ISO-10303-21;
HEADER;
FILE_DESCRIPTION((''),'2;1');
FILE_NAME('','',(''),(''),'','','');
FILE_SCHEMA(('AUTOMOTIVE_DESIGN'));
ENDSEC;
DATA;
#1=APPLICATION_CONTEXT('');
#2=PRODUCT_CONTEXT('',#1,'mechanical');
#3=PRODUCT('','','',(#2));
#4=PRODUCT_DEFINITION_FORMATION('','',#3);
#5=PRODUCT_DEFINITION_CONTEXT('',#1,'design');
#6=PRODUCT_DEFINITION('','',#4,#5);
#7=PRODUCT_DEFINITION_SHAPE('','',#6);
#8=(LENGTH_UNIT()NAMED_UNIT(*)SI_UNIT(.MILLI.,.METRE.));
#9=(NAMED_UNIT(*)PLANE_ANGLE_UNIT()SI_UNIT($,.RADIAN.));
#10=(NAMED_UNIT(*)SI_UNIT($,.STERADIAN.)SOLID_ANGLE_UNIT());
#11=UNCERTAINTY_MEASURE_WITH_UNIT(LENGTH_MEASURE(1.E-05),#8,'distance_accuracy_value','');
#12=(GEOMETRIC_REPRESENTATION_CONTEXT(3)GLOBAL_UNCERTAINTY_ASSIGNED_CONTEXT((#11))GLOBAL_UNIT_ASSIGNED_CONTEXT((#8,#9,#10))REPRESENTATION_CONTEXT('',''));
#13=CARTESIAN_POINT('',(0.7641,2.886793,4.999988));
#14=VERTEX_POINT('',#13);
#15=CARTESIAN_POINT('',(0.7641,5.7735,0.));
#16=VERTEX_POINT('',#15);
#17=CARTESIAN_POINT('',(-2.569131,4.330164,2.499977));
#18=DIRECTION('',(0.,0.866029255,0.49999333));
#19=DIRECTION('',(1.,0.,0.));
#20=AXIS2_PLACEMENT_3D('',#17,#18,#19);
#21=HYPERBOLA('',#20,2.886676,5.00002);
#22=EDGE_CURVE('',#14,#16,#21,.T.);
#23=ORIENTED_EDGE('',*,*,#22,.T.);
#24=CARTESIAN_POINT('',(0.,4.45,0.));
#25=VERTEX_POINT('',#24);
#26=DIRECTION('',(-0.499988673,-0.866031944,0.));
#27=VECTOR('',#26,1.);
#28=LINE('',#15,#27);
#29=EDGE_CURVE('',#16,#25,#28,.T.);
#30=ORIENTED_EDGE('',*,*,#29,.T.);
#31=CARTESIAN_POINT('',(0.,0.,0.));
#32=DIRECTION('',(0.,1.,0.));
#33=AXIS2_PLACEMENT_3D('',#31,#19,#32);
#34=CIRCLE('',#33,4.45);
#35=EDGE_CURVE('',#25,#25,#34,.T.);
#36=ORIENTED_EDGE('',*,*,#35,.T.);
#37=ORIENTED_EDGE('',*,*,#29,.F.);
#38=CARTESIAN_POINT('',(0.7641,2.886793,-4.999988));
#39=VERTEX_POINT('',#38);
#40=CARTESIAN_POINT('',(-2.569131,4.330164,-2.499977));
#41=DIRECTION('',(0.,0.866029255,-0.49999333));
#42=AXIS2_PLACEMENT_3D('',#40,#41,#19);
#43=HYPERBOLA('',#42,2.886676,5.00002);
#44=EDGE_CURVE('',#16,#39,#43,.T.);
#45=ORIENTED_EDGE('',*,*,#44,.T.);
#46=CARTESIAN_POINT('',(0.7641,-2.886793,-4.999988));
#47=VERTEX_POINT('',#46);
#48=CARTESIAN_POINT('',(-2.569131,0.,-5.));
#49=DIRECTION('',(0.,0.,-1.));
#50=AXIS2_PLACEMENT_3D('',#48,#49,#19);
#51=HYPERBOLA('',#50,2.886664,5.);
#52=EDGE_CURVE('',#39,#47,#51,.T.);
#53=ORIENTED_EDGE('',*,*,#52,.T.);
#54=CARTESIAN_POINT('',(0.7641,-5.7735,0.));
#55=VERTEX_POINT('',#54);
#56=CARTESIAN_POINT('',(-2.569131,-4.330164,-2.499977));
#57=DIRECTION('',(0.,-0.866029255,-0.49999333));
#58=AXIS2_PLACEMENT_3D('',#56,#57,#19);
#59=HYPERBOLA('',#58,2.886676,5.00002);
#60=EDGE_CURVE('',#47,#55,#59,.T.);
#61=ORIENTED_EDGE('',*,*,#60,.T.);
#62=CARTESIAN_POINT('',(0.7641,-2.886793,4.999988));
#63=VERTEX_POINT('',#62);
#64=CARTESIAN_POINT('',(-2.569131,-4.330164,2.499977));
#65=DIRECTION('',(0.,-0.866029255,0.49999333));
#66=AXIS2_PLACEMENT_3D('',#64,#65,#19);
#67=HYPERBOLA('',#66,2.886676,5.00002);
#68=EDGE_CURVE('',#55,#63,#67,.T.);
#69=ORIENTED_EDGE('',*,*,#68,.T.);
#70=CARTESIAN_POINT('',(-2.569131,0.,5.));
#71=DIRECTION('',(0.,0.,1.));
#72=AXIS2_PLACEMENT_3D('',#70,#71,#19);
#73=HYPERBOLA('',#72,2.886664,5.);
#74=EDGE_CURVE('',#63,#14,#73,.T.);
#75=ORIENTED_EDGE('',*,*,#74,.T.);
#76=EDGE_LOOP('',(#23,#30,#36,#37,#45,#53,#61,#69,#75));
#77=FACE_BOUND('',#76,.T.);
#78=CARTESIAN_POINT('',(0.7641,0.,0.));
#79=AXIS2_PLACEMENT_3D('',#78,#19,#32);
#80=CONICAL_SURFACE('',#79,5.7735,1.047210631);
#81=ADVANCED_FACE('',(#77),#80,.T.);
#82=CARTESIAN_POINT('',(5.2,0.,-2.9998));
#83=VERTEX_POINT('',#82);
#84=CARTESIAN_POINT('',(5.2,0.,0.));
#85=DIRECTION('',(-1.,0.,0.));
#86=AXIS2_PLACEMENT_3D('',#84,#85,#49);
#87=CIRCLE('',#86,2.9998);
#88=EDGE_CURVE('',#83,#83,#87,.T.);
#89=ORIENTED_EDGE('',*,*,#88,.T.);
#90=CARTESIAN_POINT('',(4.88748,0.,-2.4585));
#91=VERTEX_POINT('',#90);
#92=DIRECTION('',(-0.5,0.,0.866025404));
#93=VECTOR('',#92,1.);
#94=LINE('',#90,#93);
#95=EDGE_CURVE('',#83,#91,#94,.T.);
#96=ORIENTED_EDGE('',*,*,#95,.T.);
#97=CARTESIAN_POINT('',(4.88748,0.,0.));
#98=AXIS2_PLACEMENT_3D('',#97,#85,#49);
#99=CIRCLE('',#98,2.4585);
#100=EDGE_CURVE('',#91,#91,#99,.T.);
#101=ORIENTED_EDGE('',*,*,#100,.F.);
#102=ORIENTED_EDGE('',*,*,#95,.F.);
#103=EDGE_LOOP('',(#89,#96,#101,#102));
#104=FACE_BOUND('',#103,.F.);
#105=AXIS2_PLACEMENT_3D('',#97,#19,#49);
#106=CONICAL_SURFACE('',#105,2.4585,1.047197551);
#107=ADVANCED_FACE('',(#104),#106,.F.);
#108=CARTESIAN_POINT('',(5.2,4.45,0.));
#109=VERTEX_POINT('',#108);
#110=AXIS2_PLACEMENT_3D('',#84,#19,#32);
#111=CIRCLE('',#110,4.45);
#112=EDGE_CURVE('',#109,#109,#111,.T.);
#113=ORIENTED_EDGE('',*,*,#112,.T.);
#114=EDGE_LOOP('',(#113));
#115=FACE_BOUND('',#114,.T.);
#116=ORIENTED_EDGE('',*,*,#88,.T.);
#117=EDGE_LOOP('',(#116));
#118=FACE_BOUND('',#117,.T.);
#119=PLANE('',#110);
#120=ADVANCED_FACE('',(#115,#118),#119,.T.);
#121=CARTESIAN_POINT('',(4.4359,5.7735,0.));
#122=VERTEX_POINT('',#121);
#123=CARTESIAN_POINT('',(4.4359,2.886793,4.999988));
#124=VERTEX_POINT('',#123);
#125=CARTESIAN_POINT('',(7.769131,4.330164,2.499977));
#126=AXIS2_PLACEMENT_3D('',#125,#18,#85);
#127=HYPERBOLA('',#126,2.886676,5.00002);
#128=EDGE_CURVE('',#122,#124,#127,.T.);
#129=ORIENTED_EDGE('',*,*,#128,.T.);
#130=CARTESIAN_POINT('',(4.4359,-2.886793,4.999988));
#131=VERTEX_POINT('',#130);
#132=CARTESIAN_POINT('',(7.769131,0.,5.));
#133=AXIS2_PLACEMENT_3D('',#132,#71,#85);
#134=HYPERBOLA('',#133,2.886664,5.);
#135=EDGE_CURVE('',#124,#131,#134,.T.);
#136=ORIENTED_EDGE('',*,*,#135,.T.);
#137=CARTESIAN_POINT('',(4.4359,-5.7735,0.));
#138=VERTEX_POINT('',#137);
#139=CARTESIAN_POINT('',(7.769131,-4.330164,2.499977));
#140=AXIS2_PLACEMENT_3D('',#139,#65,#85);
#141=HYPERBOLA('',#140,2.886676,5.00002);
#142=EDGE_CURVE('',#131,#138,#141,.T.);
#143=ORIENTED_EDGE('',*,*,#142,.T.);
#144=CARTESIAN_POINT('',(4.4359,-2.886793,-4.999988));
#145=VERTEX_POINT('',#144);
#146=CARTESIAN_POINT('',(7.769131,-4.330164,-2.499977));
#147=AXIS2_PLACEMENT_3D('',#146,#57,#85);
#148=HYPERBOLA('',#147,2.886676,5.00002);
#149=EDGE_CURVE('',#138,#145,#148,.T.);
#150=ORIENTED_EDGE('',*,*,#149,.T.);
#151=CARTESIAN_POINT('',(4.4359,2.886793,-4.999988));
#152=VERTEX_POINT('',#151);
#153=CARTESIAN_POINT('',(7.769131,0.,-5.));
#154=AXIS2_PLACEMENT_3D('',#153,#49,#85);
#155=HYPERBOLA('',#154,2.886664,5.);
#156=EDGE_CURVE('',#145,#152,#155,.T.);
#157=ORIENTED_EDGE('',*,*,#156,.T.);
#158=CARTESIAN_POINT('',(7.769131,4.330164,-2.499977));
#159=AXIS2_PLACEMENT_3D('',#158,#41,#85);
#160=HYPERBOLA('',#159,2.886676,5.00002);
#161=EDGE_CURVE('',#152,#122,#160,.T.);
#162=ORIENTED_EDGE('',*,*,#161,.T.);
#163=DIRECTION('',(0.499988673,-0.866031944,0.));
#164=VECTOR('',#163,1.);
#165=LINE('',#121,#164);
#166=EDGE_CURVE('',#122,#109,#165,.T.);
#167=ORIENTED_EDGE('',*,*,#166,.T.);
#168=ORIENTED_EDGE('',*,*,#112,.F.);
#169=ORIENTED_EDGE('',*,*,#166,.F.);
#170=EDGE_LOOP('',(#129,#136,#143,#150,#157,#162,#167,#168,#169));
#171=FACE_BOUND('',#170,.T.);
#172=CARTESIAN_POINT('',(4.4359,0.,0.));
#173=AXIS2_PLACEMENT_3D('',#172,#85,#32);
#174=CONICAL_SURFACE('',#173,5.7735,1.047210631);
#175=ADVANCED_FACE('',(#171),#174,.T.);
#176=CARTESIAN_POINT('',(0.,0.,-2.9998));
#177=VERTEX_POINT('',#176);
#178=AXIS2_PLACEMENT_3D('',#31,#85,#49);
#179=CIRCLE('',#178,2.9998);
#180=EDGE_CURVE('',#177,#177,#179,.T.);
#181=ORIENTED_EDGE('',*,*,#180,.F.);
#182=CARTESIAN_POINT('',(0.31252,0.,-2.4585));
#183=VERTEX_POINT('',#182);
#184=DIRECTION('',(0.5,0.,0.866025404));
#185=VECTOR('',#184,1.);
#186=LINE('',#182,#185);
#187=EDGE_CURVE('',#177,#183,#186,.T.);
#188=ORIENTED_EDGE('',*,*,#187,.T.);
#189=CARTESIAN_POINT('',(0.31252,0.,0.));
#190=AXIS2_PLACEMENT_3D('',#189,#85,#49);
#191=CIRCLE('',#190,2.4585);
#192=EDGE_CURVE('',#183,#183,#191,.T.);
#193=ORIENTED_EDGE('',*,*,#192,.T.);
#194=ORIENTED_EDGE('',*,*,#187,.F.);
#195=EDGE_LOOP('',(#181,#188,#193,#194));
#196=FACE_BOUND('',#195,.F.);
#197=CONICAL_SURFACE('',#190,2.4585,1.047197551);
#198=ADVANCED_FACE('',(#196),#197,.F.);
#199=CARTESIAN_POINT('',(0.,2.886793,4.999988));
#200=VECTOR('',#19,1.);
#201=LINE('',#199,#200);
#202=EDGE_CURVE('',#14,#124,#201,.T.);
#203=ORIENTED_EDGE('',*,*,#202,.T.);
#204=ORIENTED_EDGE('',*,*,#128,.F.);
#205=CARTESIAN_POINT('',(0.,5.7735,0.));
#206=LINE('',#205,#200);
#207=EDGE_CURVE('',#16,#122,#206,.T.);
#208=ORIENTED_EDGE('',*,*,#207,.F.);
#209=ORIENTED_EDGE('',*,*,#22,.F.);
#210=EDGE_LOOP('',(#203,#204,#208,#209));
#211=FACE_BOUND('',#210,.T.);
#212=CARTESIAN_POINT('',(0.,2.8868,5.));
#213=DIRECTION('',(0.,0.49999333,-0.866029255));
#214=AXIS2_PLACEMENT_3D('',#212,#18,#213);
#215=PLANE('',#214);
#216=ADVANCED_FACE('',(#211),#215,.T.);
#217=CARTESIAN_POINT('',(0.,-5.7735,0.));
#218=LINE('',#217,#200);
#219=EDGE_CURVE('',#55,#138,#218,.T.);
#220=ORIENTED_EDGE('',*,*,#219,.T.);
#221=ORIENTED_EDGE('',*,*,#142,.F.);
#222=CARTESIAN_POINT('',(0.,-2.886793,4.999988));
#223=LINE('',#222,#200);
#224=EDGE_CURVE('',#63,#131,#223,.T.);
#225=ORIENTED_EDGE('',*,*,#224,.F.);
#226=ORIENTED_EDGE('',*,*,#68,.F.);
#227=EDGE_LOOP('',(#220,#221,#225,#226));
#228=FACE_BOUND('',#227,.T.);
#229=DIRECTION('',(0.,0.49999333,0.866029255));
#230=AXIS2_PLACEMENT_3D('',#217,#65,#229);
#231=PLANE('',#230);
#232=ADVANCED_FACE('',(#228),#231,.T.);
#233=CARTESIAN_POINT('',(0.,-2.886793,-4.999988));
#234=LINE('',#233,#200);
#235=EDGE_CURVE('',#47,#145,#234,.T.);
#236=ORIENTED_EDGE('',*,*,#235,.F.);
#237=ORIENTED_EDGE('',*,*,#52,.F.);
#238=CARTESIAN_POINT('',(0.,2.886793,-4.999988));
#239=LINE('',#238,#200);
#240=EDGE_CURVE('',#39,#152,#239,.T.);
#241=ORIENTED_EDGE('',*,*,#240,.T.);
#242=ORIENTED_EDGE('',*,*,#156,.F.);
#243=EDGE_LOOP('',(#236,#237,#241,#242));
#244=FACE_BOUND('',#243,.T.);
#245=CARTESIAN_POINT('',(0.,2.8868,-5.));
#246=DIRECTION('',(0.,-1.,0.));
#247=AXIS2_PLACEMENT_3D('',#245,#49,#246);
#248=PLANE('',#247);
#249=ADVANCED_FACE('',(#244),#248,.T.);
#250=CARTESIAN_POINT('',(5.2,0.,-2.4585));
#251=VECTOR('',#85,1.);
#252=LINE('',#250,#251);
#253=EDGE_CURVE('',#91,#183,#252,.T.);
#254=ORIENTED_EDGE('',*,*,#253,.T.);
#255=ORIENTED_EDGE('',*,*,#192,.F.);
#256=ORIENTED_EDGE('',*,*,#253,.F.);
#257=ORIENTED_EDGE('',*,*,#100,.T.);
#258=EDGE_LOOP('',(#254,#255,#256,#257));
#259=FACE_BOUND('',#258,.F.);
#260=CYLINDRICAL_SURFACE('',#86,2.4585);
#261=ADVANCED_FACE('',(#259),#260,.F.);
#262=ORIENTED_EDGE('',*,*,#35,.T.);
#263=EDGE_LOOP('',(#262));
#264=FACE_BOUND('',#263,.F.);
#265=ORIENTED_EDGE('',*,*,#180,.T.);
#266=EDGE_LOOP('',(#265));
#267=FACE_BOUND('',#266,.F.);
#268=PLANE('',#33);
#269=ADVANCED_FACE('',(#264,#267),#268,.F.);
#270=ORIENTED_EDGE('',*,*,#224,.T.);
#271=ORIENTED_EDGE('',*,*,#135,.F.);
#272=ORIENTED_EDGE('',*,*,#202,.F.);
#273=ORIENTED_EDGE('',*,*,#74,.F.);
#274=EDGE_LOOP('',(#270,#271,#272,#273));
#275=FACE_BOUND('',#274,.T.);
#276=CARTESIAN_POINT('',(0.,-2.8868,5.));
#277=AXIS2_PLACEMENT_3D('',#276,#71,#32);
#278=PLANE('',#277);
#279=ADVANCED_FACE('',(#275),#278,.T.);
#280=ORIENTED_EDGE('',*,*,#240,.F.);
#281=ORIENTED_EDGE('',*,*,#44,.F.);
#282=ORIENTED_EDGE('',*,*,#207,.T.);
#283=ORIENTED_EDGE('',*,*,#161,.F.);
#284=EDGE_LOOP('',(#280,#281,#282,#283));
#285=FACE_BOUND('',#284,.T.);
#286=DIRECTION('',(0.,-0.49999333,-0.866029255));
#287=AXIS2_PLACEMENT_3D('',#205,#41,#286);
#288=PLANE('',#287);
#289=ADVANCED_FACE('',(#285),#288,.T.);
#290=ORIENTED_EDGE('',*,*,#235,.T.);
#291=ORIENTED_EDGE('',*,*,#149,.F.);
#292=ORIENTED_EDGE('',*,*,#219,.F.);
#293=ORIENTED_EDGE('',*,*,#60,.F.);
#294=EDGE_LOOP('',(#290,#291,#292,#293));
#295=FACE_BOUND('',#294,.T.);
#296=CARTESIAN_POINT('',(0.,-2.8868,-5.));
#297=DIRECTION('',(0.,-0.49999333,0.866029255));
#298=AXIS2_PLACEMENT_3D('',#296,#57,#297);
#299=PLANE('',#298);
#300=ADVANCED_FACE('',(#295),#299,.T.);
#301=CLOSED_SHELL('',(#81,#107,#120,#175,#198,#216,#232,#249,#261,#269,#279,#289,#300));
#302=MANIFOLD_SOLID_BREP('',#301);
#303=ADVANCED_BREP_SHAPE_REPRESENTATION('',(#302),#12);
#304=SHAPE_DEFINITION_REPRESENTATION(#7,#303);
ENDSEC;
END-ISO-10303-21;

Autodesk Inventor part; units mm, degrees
ref_plane "YZ Plane" through (0, 0, 0) normal (1, 0, 0) x (0, 1, 0)
ref_plane "XZ Plane" through (0, 0, 0) normal (0, 1, 0) x (-1, 0, 0)
sketch "Szkic1" plane through (0, 0, 0) normal (1, 0, 0) x (0, 1, 0)
  line L0 (-5.7735, 0) -> (-2.8868, 5)
  line L1 (-2.8868, 5) -> (2.8868, 5)
  line L2 (2.8868, 5) -> (5.7735, 0)
  line L3 (5.7735, 0) -> (2.8868, -5)
  line L4 (2.8868, -5) -> (-2.8868, -5)
  line L5 (-2.8868, -5) -> (-5.7735, 0)
  point P0 (0, 0)
  point P1 (0, 0)
  dimension "d0" = 11.547
extrude "Bryła" add sketch "Szkic1" along normal blind 5.2
sketch "Szkic2" plane through (0, 0, 0) normal (0, 0, 1) x (1, 0, 0)
  line L0 (0, 2.8868) -> (0, 5.7735) projected
  line L1 (0, 5.7735) -> (5.2, 5.7735) projected
  line L2 (5.2, 2.8868) -> (5.2, 5.7735) projected
  line L3 (-1.04, 0) -> (6.24, 0) projected
  line L4 (0.7641, 5.7735) -> (0, 4.45)
  line L5 (4.4359, 5.7735) -> (5.2, 4.45)
  dimension "d3" = 30
  dimension "d4" = 30
  dimension "d5" = 8.9
  dimension "d6" = 8.9
revolve "Faza1" cut sketch "Szkic2" angle 360 about axis through (-10, 0, 0) along (1, 0, 0)
sketch "Szkic3" plane through (5.2, 0, 0) normal (1, 0, 0) x (0, 0, -1)
  arc A0 (-0.625, -1.0825) -> (0.625, -1.0825) centre (0, 0) ccw projected
hole "Gwint" at (5.2, 0, 0) direction (-1, 0, 0) diameter 4.917 end through all thread size "M6x1" class "6H" standard "ISO Metric profile"
chamfer "Faza2" distance 0.5413 angle 30 1 edges at (5.2, 0, 2.4585) measured on face at (5.2, 3.7371, -0.4538)
chamfer "Faza3" distance 0.5413 angle 30 1 edges at (0, 0, 2.4585) measured on face at (0, 3.7371, -0.4538)
ref_plane "Work Plane1" through (-10.9812, 0, 0) normal (0, -0.8660254, -0.5) x (1, 0, 0)
equation "\"d0\" = 1.1547 * SW"
equation "\"d1\" = KOH"
equation "\"d8\" = -0.5 * GD1 + 0.5 * NND"
equation "\"d40\" = -0.5 * GD1 + 0.5 * NND"
equation "\"d10\" = -0.5 * GD1 + 0.5 * NND"
equation "\"d41\" = -0.5 * GD1 + 0.5 * NND"
equation "\"d3\" = ANG1"
equation "\"d4\" = ANG2"
equation "\"d5\" = SW0"
equation "\"d6\" = SW01"
equation "\"ANG1\" = 30deg"
equation "\"ANG2\" = 30deg"
equation "\"NND\" = 6"
equation "\"KOH\" = 5.2"
equation "\"SW0\" = 8.9"
equation "\"SW01\" = 8.9"
equation "\"GUL\" = 0.541266 * PTC"
equation "\"THREADDIA\" = 6"
equation "\"TOA\" = 30deg"
equation "\"PTC\" = 1"
equation "\"E0\" = 1.155 * SW"
equation "\"GAL\" = 0.541266 * PTC"
equation "\"SW\" = 10"
equation "\"GD1\" = 4.917468"
properties part number "ISO 4032 - M6" material "Stal nierdzewna 440C"
